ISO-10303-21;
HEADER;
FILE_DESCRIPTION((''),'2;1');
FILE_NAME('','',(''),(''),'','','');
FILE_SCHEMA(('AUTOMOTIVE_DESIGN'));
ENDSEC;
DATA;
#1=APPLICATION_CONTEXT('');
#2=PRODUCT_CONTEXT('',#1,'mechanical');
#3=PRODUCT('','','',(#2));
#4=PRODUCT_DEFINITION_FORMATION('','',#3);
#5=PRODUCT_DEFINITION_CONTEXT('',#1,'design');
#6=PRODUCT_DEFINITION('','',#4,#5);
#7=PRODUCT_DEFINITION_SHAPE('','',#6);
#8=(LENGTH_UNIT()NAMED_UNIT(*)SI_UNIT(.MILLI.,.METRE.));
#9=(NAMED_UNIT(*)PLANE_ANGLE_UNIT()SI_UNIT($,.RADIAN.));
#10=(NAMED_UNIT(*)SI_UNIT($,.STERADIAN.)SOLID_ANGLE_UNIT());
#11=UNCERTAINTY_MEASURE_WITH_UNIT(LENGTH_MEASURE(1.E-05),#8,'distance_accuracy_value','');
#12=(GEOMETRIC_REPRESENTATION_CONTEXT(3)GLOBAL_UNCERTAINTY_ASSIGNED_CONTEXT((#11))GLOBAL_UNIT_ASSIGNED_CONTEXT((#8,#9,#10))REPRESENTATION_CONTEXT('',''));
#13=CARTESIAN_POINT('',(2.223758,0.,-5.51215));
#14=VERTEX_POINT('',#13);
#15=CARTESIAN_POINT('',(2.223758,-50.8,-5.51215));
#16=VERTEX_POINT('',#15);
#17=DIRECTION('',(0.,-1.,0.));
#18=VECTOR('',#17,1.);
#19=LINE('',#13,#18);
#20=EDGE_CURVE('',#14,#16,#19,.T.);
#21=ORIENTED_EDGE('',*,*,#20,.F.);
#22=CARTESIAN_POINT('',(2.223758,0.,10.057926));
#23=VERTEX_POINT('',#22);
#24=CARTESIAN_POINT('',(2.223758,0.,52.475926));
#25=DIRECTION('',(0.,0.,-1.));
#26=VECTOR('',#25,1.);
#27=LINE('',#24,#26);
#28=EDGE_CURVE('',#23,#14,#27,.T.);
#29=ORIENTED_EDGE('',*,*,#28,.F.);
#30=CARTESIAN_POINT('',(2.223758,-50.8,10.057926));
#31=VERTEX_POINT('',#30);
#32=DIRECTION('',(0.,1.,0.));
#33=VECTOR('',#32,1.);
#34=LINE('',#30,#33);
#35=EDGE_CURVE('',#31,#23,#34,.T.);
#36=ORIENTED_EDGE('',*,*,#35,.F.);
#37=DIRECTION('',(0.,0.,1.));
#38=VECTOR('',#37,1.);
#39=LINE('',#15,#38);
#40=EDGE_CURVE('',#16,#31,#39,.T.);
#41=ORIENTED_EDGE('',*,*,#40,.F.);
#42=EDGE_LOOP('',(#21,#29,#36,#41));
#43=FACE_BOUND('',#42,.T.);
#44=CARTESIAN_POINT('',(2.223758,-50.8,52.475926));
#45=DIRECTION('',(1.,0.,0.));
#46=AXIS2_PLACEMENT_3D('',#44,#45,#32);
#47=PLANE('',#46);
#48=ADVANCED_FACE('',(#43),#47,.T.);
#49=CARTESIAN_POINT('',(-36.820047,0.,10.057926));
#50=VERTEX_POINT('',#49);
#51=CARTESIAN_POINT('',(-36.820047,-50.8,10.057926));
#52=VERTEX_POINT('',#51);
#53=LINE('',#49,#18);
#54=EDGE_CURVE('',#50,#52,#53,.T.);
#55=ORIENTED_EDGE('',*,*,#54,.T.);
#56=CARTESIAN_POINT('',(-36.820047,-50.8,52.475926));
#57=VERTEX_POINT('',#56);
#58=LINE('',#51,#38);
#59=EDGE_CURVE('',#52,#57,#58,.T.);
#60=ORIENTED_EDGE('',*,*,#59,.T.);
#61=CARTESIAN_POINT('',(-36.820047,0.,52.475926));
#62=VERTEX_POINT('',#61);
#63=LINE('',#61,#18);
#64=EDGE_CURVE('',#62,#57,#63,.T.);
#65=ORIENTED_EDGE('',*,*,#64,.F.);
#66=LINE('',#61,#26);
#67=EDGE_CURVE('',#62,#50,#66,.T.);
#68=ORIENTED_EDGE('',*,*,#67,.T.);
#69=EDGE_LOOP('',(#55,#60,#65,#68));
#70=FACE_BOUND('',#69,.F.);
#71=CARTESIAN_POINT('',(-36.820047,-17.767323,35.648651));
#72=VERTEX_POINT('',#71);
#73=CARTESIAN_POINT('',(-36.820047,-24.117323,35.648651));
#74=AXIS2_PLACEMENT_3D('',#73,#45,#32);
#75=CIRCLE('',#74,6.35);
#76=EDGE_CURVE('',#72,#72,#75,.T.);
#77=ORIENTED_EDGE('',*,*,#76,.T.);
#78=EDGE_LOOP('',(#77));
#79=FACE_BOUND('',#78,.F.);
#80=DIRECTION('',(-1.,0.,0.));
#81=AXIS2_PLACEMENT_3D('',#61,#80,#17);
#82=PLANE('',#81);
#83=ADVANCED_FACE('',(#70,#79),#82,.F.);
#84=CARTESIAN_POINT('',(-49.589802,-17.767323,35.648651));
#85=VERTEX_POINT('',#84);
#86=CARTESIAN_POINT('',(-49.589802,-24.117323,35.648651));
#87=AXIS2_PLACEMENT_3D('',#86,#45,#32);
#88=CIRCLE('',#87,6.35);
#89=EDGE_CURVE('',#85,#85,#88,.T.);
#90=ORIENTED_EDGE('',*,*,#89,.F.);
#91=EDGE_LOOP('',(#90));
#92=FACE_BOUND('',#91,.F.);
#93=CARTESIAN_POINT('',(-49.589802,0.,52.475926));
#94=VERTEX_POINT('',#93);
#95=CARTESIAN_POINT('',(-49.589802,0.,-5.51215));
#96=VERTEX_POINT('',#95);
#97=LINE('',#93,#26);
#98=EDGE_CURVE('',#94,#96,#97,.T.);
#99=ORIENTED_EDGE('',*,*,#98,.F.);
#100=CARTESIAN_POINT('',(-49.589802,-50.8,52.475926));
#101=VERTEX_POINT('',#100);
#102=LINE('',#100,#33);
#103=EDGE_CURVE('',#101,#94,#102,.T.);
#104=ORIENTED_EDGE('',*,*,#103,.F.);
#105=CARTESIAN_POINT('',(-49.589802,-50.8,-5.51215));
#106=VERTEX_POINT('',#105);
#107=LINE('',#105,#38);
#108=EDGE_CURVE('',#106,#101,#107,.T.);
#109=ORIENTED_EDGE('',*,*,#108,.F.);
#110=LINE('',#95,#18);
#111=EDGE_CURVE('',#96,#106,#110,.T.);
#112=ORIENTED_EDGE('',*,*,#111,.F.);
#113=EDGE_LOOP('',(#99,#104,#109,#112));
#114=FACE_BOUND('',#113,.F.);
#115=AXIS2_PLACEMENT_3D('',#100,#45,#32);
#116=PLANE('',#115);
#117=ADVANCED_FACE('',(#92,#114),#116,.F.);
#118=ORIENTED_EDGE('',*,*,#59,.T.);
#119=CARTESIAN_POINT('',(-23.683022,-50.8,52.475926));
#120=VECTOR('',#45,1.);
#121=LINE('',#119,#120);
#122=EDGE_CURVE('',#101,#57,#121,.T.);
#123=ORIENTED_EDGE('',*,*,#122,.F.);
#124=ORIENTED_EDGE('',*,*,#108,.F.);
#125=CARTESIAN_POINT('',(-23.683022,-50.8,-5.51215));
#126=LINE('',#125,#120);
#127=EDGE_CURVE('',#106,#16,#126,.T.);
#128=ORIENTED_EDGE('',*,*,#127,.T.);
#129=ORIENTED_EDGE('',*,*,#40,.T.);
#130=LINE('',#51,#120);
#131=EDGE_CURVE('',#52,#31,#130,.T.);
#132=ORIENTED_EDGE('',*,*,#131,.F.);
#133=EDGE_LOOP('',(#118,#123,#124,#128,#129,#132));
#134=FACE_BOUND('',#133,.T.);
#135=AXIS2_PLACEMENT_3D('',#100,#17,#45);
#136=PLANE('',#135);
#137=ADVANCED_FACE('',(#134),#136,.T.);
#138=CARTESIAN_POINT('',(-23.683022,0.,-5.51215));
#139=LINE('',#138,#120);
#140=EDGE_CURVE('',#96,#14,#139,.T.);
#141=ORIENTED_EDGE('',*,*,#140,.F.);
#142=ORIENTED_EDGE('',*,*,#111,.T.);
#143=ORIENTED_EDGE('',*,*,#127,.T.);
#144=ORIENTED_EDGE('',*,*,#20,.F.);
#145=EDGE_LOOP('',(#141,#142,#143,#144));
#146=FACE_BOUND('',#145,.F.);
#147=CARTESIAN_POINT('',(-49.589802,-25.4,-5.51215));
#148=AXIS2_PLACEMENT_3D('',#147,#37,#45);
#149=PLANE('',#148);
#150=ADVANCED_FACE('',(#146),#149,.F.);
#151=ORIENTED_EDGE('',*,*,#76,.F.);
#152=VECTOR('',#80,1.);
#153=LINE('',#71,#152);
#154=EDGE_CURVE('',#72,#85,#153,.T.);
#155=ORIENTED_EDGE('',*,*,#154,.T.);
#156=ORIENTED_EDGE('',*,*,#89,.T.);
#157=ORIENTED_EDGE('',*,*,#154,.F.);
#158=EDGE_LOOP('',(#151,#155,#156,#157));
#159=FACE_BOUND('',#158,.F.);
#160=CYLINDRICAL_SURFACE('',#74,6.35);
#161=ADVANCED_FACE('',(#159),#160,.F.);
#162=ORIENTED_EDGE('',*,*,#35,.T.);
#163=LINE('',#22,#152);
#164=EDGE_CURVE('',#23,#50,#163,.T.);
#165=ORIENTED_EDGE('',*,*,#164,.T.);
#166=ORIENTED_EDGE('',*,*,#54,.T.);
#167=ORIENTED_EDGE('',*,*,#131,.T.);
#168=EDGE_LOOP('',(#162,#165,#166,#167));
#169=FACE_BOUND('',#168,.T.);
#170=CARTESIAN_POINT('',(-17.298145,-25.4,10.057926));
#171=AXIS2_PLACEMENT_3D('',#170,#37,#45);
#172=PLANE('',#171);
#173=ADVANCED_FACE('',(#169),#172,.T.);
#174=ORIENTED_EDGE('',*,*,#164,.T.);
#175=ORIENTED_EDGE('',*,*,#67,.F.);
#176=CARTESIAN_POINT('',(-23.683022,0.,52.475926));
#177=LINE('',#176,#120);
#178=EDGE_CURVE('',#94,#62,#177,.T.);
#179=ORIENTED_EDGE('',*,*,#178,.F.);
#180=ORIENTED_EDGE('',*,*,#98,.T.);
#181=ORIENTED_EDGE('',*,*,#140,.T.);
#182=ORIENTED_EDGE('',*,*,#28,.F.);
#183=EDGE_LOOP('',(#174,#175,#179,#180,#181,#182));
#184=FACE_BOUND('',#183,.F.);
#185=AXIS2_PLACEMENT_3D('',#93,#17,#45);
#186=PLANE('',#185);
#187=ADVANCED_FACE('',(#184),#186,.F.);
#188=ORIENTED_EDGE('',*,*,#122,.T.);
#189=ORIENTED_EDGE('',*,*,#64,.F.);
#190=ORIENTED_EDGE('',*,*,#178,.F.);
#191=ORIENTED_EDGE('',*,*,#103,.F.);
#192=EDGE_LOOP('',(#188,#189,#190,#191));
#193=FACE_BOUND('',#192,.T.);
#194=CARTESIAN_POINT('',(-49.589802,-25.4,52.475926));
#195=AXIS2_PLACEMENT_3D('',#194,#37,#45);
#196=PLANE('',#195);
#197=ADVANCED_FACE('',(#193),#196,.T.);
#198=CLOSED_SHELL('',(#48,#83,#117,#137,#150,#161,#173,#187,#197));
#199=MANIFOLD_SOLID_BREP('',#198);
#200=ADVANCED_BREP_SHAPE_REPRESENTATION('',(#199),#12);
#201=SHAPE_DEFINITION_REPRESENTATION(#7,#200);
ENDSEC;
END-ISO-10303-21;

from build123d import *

# Parameters (mm, degrees)
F0_W     = 51.813559141
F0_H     = 32.5880763121
F1_DEPTH = 25.4
F2_DEPTH = 25.4
F3_DEPTH = 25.4
F4_DEPTH = 7.1882
F6_DEPTH = 37.846
F7_R     = 6.35
F8_DEPTH = 50.8
F9_DEPTH = 4.572


# Not quite as in the source:
# - a feature of the source that left no trace in its solid (it failed there, or was rolled back) is left out


with BuildPart() as f1:
    # F0 (on Front) → F1 (new body)
    with BuildSketch(Plane.XZ):
        with Locations((-23.6830220092, 10.7818876859)):
            Rectangle(F0_W, F0_H)
    extrude(amount=F1_DEPTH)

    # F2 (add): a face of the model
    f2_faces = [f1.faces().sort_by_distance(p)[0] for p in [
        (-23.6830220092, -25.4, 10.7818876859),
    ]]
    extrude(f2_faces, amount=F2_DEPTH)

    # F3 (add): a face of the model
    f3_faces = [f1.faces().sort_by_distance(p)[0] for p in [
        (-23.6830220092, -25.4, 27.0759258419),
    ]]
    extrude(f3_faces, amount=F3_DEPTH)

    # F4 (add): a face of the model
    f4_faces = [f1.faces().sort_by_distance(p)[0] for p in [
        (-23.6830220092, -25.4, 52.4759258419),
    ]]
    extrude(f4_faces, amount=-F4_DEPTH)

    # F5 (on face) → F6 (cut)
    with BuildSketch(Plane.XY.offset(52.4759258419)):
        Polygon((-36.8200466037, 0), (-36.8200466037, -25.4), (-36.8200466037, -50.8), (2.2237575613, -50.8), (2.2237575613, 0), align=None)
    extrude(amount=-F6_DEPTH, mode=Mode.SUBTRACT)

    # F7 (on face) → F8 (cut)
    with BuildSketch(Plane.YZ.offset(-36.8200466037)):
        with Locations((-24.1173226386, 35.6486514211)):
            Circle(F7_R)
    extrude(amount=-F8_DEPTH, mode=Mode.SUBTRACT)

    # F9 (cut): a face of the model
    f9_faces = [f1.faces().sort_by_distance(p)[0] for p in [
        (-17.2981445212, -25.4, 14.6299258419),
    ]]
    extrude(f9_faces, amount=-F9_DEPTH, mode=Mode.SUBTRACT)


solid = f1.part
